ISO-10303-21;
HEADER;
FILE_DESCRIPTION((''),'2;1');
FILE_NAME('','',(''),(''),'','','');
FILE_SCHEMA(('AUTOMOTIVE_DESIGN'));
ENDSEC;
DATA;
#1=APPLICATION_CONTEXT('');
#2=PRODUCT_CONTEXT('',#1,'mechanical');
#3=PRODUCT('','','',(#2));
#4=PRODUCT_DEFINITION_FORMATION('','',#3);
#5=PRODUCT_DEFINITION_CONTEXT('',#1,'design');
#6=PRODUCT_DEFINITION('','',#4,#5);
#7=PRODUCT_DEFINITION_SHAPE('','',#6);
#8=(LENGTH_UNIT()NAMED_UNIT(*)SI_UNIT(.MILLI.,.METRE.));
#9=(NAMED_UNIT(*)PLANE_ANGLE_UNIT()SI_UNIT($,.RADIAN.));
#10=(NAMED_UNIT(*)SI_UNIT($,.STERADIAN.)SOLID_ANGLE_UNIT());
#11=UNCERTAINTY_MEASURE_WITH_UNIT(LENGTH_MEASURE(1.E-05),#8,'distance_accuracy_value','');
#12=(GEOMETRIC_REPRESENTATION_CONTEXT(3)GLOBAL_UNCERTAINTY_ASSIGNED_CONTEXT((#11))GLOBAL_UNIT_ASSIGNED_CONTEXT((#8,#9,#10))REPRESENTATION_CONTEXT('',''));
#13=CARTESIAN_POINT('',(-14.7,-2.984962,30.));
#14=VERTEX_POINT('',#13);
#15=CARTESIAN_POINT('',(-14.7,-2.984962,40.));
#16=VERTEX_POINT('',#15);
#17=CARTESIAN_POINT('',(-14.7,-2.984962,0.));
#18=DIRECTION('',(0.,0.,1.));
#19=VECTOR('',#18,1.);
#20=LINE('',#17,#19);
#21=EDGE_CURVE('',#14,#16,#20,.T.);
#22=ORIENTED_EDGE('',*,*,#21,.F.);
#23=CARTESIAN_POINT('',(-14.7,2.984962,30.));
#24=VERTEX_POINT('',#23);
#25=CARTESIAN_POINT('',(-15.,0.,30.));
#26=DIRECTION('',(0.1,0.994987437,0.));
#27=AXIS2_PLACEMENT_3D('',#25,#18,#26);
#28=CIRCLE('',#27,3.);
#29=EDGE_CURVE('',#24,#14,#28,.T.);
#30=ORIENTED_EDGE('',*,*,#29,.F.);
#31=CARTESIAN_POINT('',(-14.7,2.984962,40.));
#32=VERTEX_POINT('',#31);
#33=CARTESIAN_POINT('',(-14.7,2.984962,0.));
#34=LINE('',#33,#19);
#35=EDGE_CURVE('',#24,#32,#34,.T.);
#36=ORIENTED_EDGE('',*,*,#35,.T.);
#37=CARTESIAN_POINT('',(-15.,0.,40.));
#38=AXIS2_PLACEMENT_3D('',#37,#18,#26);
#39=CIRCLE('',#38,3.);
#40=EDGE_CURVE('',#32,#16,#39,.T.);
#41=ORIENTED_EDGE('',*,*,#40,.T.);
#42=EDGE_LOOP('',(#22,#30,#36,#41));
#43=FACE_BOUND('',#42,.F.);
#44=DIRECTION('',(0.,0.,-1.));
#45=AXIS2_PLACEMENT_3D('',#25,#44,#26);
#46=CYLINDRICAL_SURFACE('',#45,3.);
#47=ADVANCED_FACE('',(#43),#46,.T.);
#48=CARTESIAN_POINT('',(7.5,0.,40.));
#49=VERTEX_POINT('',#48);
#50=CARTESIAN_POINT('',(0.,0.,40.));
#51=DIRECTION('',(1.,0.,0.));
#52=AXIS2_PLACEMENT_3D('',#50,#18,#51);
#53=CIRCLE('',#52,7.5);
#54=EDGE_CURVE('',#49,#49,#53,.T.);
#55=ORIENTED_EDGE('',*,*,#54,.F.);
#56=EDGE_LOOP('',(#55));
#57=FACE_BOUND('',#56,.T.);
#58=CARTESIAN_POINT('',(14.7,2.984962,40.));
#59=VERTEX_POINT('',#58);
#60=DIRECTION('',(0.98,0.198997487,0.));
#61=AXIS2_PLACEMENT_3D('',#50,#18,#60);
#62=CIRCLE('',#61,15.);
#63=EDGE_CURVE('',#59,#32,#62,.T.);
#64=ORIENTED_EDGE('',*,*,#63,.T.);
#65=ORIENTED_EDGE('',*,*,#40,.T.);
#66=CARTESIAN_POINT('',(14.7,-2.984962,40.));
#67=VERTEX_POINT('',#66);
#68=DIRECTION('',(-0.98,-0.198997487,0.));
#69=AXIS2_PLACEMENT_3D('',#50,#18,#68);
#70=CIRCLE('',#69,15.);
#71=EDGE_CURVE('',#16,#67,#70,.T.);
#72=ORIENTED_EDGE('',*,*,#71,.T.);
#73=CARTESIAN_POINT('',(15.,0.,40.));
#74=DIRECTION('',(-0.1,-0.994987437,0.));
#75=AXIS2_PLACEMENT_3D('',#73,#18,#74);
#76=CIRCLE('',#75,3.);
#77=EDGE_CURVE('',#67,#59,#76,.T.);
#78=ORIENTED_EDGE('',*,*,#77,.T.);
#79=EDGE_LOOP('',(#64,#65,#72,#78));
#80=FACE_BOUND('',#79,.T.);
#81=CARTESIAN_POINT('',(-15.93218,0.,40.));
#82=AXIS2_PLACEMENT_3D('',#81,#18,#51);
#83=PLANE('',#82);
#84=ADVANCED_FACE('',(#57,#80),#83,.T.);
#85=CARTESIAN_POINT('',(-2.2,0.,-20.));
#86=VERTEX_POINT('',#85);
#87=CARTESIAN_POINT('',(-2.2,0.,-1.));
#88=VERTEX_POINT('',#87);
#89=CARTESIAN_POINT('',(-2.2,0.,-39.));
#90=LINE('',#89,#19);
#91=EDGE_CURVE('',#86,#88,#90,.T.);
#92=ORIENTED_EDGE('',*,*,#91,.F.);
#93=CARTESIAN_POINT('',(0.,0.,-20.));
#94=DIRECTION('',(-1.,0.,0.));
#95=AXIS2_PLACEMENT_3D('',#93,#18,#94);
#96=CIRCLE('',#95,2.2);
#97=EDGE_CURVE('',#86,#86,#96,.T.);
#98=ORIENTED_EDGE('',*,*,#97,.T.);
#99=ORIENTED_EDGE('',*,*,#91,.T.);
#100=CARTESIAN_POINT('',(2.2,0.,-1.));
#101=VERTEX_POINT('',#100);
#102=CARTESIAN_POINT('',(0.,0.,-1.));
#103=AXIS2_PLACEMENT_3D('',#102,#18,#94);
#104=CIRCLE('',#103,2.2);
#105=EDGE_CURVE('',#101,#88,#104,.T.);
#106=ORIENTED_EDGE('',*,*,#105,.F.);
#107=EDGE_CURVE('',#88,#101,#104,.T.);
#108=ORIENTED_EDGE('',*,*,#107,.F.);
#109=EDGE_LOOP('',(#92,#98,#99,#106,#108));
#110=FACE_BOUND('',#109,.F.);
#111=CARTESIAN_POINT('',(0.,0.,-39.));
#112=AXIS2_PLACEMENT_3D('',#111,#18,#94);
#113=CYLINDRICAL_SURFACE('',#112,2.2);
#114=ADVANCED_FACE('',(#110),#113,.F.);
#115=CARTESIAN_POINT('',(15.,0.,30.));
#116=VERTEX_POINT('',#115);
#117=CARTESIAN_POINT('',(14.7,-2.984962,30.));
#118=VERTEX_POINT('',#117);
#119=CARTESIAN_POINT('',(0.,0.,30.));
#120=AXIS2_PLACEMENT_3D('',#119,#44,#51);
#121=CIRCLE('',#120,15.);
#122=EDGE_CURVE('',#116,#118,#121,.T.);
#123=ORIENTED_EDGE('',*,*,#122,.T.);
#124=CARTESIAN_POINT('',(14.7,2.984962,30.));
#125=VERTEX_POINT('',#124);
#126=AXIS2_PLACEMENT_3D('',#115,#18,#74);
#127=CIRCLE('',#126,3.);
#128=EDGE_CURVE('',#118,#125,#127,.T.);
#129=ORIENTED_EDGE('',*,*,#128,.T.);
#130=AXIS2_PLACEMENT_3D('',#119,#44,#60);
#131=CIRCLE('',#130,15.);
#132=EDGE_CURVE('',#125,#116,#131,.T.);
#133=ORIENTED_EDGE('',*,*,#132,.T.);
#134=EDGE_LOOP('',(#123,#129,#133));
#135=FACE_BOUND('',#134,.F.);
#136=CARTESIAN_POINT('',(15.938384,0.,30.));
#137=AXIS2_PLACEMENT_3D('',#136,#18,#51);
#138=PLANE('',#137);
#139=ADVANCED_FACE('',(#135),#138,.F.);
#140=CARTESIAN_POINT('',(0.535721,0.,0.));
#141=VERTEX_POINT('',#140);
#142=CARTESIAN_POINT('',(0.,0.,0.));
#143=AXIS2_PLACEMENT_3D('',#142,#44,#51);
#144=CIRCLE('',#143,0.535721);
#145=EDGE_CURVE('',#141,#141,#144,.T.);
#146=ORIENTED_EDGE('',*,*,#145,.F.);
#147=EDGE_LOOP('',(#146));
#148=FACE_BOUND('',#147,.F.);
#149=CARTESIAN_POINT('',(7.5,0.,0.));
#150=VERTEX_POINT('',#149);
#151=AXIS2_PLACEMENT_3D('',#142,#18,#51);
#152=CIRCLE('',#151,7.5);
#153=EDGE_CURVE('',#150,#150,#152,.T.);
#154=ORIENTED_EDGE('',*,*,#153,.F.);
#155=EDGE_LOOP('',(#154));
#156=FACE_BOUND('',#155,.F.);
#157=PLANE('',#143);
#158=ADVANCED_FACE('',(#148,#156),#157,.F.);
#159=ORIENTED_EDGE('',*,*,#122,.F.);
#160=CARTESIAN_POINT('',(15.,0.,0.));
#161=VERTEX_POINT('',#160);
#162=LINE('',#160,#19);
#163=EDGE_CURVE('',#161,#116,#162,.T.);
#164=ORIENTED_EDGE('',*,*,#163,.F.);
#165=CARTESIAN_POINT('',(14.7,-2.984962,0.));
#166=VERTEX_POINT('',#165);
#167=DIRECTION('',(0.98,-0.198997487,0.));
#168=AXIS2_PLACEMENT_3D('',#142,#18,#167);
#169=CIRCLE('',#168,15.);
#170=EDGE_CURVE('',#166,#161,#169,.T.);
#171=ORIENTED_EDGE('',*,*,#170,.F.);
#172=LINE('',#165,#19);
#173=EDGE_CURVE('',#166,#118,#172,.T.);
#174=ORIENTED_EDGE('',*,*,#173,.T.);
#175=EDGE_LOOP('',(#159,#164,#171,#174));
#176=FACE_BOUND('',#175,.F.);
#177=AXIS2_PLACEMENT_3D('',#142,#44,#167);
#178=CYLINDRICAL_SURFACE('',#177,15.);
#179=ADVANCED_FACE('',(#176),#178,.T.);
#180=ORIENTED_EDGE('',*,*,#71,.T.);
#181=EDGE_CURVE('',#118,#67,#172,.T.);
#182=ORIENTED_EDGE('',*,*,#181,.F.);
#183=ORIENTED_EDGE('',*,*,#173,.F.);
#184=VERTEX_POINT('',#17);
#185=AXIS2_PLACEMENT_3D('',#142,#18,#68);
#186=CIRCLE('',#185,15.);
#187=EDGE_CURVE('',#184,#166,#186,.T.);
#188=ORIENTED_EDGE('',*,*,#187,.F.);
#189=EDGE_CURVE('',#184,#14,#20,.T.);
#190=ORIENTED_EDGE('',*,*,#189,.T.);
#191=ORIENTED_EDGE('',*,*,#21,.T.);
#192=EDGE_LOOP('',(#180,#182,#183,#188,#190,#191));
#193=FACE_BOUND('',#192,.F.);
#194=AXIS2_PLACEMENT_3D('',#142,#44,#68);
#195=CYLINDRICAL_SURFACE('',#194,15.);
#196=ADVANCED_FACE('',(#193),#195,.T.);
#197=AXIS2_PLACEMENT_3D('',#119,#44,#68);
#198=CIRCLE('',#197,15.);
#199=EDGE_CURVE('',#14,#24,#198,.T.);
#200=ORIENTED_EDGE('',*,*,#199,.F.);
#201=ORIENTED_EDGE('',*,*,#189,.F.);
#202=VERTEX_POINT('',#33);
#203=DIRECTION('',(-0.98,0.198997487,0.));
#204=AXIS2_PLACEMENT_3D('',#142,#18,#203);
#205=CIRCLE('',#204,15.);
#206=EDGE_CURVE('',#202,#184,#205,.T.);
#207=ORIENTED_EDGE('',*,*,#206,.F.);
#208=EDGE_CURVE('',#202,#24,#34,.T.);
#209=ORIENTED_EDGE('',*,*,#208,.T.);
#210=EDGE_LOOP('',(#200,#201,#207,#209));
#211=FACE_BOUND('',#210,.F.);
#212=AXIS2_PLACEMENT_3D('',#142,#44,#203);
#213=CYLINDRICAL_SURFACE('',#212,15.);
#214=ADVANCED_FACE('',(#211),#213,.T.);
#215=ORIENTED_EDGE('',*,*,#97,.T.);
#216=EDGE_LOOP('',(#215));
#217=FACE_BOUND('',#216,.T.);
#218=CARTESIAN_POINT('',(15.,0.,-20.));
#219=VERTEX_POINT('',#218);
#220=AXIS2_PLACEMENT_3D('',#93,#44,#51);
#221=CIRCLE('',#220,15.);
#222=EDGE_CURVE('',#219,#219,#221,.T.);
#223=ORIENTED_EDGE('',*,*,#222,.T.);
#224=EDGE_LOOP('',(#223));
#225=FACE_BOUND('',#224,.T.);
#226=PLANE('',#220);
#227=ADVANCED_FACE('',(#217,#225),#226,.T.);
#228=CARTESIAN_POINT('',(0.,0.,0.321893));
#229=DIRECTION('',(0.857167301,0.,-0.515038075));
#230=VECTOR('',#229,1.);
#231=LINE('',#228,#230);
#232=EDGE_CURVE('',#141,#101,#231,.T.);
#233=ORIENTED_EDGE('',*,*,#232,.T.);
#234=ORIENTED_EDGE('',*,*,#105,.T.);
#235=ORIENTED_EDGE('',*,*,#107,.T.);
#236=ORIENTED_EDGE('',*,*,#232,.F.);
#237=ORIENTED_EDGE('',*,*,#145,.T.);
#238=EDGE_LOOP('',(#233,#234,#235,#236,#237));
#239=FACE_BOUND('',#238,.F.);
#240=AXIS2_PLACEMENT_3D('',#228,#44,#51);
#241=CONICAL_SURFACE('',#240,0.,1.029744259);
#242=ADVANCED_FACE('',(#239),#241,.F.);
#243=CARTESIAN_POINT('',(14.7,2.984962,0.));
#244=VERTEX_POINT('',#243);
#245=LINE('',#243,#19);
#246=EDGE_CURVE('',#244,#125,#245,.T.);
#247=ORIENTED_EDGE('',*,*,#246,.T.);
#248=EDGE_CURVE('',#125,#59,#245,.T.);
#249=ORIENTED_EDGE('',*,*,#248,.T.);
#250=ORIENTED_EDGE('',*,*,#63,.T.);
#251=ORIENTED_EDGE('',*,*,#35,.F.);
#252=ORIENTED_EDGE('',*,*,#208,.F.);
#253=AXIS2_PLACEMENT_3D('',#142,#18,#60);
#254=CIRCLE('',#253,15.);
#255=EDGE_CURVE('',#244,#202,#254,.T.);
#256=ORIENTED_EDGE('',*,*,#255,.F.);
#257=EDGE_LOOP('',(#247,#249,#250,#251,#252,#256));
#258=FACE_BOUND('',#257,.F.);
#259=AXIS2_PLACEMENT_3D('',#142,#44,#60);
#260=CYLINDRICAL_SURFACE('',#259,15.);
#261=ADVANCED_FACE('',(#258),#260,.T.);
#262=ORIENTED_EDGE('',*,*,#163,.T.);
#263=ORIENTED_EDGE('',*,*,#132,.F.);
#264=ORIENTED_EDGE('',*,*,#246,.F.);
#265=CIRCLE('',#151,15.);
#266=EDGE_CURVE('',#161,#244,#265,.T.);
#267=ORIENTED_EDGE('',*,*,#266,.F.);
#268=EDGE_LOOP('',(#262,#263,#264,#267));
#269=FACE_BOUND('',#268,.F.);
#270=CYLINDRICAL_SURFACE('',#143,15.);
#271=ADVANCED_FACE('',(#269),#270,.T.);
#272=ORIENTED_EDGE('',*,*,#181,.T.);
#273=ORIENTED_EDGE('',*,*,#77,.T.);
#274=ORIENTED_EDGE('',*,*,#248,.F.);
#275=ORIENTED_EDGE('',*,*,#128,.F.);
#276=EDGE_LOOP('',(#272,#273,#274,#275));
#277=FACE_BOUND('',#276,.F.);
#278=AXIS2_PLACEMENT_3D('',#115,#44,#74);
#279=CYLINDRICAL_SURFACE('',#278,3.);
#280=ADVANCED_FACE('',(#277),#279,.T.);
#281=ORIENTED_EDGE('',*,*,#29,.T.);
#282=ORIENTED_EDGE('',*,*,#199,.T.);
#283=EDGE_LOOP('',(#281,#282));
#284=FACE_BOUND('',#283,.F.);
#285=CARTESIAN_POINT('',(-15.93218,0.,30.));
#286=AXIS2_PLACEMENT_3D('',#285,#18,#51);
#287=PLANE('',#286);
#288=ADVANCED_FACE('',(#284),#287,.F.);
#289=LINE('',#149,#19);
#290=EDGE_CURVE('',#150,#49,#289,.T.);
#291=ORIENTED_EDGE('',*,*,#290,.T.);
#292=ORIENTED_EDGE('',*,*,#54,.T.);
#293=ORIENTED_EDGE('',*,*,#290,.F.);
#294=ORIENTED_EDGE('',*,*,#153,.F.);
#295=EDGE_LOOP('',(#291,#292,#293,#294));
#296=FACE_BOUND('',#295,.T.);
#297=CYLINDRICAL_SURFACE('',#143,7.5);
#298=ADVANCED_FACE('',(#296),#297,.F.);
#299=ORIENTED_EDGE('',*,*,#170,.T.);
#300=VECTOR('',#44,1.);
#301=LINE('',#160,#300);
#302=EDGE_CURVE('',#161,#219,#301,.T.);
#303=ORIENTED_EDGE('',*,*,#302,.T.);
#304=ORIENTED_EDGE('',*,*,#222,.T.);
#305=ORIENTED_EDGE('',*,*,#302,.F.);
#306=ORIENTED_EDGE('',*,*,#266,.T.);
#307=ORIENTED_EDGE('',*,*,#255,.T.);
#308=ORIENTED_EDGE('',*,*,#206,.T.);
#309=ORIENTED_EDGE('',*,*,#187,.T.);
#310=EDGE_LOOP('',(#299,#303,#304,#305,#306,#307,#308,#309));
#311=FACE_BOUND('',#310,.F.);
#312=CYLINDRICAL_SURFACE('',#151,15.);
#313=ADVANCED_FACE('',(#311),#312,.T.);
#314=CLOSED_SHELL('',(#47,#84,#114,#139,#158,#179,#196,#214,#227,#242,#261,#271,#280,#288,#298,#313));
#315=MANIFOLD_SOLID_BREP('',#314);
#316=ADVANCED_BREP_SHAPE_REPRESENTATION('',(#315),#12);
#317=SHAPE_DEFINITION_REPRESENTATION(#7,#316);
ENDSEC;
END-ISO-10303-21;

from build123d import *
from build123d import SkipClean  # not in build123d's __all__

# Parameters (mm, degrees)
F0_R     = 7.5
F1_DEPTH = 40
F2_START = 30
F2_DEPTH = 10
F3_R     = 15
F4_DEPTH = 20
F6_D     = 4.4
F6_DEPTH = 19
F6_TIP   = 1.3218933619


# Not quite as in the source:
# - after a boolean that leaves OpenCascade's solid faulty, fix() repairs it


with BuildPart() as f1:
    # F0 (on Top) → F1 (new body)
    with BuildSketch(Plane.XY):
        with BuildLine():
            ThreePointArc((14.7, -2.9849623113), (14.9248115566, -1.5), (15, 0))
            ThreePointArc((15, 0), (14.9248115566, 1.5), (14.7, 2.9849623113))
            ThreePointArc((14.7, 2.9849623113), (0, 15), (-14.7, 2.9849623113))
            ThreePointArc((-14.7, 2.9849623113), (-15, 0), (-14.7, -2.9849623113))
            ThreePointArc((-14.7, -2.9849623113), (0, -15), (14.7, -2.9849623113))
        make_face()
        Circle(F0_R, mode=Mode.SUBTRACT)
    extrude(amount=F1_DEPTH)

    # F0 (on Top) → F2 (join)
    with BuildSketch(Plane.XY.offset(F2_START)):
        with BuildLine():
            ThreePointArc((-14.7, -2.9849623113), (-15, 0), (-14.7, 2.9849623113))
            ThreePointArc((-14.7, 2.9849623113), (-18, 0), (-14.7, -2.9849623113))
        make_face()
        with BuildLine():
            ThreePointArc((14.7, 2.9849623113), (14.9248115566, 1.5), (15, 0))
            ThreePointArc((15, 0), (14.9248115566, -1.5), (14.7, -2.9849623113))
            ThreePointArc((14.7, -2.9849623113), (18, 0), (14.7, 2.9849623113))
        make_face()
    extrude(amount=F2_DEPTH)

    # F3 (on face) → F4 (join)
    with BuildSketch(Plane(origin=(0, 0, 0), x_dir=(1, 0, 0), z_dir=(0, 0, -1))):
        Circle(F3_R)
    with SkipClean():  # cleaning this boolean's faces spoils the solid; the shape is the same uncleaned
        extrude(amount=F4_DEPTH)

    # F6
    with Locations(Plane(origin=(0, 0, -20), x_dir=(1, 0, 0), z_dir=(0, 0, -1))):
        with Locations((0, 0)):
            Hole(F6_D / 2, depth=F6_DEPTH)
            with Locations((0, 0, -(F6_DEPTH + F6_TIP / 2))):  # 118° drill point
                Cone(0, F6_D / 2, F6_TIP, mode=Mode.SUBTRACT)

    add(f1.part.fix(), mode=Mode.REPLACE)


solid = f1.part
